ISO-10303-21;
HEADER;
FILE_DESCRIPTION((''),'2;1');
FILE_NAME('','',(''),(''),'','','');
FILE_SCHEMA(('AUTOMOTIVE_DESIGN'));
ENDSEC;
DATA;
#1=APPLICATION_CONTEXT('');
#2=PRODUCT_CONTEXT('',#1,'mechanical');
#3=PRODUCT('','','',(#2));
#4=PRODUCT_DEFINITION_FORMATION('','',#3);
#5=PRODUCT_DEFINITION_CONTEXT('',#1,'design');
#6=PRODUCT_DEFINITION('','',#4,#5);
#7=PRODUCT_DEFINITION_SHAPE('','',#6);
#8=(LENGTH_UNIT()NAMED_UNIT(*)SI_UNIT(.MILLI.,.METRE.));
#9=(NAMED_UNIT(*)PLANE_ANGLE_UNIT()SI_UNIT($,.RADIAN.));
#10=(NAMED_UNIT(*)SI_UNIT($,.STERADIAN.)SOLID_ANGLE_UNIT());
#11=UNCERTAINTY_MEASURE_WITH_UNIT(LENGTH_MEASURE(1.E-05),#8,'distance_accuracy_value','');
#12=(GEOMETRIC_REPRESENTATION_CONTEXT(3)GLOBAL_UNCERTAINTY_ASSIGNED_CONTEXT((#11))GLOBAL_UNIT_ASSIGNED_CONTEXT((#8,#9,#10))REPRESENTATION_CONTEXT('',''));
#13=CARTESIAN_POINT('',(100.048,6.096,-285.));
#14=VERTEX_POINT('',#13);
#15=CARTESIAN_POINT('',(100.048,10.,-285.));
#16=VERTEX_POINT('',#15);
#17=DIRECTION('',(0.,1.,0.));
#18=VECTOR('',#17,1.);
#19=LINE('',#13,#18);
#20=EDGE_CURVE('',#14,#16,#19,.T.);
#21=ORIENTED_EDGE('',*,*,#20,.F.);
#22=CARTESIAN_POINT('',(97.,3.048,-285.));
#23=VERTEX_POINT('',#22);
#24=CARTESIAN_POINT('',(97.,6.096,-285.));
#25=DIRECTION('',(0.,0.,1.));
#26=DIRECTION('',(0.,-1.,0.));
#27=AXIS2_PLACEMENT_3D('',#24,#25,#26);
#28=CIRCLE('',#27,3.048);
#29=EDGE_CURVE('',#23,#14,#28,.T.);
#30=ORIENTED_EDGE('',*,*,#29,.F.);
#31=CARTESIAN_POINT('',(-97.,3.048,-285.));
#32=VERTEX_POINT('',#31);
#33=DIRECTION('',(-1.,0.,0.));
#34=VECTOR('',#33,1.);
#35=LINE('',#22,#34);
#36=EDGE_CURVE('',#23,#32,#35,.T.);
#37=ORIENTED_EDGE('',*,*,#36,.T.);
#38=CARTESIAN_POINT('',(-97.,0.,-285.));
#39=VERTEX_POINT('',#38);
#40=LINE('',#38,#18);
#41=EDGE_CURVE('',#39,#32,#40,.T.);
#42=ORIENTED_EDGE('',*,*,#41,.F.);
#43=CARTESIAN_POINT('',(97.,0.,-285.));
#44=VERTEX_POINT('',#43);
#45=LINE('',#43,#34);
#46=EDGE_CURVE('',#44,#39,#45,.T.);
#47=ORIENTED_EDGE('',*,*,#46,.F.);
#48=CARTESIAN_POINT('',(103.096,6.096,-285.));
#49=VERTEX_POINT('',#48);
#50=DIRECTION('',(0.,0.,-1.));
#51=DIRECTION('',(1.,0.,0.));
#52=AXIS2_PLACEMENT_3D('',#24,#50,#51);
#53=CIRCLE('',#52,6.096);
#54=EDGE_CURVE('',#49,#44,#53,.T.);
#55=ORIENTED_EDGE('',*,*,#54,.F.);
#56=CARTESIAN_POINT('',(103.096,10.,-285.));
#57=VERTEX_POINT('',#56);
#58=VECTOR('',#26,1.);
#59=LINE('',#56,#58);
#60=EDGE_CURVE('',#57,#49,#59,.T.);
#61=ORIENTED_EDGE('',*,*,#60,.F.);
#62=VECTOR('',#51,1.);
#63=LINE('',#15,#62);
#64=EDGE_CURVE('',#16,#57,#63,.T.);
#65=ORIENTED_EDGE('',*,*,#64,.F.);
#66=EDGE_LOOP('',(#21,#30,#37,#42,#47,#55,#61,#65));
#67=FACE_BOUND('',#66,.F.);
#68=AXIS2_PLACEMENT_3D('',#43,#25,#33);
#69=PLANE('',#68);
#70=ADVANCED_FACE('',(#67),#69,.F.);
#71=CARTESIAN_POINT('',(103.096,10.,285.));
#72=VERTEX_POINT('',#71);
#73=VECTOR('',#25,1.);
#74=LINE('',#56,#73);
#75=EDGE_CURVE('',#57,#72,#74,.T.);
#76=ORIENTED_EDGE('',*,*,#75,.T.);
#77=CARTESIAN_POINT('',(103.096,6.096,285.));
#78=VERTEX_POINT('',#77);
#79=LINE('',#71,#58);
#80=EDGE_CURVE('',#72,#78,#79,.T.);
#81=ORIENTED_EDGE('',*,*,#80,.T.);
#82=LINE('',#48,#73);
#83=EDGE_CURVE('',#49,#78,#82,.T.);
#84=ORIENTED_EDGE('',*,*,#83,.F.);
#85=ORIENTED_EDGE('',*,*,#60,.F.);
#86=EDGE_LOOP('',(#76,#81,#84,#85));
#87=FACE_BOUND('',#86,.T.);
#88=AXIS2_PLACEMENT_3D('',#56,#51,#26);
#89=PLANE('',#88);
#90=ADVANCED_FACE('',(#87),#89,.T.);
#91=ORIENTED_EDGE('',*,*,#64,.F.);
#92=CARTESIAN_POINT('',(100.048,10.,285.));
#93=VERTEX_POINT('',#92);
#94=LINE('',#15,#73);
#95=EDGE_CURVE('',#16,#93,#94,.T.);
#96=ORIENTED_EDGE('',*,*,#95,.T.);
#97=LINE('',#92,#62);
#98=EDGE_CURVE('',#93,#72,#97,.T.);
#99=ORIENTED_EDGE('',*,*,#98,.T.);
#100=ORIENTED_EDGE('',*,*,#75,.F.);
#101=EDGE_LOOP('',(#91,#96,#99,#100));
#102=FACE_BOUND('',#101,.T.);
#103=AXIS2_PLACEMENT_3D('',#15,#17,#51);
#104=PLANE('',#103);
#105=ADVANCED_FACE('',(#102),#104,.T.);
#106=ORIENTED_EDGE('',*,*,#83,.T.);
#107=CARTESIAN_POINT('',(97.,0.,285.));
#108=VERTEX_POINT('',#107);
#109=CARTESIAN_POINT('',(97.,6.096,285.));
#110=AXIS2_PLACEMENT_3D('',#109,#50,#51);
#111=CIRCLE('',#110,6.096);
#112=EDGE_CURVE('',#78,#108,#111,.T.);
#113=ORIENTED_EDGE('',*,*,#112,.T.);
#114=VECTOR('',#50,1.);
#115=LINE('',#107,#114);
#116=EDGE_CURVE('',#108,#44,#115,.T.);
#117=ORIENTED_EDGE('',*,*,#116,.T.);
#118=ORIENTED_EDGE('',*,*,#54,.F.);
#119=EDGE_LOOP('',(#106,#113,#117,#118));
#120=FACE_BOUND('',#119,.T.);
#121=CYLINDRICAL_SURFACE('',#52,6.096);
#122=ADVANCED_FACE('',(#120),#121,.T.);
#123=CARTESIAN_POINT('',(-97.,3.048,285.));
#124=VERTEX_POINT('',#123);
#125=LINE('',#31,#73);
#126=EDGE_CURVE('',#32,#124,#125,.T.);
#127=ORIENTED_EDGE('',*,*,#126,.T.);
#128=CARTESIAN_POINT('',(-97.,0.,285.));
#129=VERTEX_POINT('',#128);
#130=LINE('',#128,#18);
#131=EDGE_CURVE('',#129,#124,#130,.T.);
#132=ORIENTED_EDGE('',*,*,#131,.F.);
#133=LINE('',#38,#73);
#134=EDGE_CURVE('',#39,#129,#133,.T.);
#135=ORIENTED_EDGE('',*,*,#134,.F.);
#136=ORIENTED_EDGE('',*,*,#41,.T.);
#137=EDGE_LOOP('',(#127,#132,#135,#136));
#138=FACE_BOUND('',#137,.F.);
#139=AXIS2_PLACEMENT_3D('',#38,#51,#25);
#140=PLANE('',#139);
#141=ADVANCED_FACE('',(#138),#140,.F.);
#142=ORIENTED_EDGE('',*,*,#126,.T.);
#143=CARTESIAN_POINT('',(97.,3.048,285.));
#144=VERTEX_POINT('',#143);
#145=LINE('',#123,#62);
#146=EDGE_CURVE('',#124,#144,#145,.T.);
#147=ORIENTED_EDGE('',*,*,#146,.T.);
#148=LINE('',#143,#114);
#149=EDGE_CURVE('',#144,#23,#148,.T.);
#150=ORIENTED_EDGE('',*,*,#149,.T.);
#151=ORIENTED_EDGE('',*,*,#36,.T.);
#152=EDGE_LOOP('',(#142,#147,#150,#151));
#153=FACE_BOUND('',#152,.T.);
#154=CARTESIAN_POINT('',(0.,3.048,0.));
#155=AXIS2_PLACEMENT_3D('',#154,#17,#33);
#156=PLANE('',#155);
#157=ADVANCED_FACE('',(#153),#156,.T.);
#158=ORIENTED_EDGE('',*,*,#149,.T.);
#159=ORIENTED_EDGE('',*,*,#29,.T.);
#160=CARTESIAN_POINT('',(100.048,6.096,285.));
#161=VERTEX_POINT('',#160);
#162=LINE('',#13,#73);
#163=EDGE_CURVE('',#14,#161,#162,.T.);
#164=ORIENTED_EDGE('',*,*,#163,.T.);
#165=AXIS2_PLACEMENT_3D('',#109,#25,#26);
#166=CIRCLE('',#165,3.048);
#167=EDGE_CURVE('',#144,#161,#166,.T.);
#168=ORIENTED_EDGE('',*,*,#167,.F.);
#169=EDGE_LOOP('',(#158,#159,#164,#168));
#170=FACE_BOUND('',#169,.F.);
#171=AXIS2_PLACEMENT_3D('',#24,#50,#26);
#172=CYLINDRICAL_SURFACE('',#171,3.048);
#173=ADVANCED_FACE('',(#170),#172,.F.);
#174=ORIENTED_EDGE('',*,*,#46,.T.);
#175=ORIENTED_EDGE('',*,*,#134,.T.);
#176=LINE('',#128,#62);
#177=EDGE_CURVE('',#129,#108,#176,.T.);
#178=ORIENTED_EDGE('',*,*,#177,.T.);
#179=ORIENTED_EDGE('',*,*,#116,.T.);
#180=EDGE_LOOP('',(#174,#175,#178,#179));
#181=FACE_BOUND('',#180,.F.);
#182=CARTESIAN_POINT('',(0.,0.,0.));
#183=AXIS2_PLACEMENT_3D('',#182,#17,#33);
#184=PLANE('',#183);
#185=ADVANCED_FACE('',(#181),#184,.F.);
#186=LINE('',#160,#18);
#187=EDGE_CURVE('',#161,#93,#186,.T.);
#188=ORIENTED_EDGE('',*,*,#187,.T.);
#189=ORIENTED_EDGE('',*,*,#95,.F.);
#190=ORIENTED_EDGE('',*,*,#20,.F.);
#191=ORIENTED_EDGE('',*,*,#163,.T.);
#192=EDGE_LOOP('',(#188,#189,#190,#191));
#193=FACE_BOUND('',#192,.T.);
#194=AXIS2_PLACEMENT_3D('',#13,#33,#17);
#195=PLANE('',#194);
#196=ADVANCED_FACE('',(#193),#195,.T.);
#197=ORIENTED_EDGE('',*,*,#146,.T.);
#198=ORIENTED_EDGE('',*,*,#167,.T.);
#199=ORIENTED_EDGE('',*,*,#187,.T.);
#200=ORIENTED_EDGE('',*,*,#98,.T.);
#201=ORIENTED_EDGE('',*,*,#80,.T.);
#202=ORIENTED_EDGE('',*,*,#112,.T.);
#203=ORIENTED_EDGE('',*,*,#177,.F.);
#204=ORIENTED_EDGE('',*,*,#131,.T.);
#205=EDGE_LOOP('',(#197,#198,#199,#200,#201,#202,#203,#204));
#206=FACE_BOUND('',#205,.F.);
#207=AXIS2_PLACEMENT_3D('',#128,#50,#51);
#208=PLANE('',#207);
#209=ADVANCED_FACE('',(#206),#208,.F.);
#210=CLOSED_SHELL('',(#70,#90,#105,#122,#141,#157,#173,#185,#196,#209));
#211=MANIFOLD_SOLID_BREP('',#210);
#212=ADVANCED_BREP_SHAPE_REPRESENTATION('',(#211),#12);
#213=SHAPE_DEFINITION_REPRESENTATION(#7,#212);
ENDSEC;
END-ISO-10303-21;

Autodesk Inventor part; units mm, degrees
ref_plane "YZ Plane" through (0, 0, 0) normal (1, 0, 0) x (0, 1, 0)
ref_plane "XZ Plane" through (0, 0, 0) normal (0, 1, 0) x (-1, 0, 0)
ref_plane "XY Plane" through (0, 0, 0) normal (0, 0, 1) x (1, 0, 0)
sketch "Sketch1" plane through (0, 0, 0) normal (0, 1, 0) x (-1, 0, 0)
  line L0 (97, 285) -> (-97, 285)
  line L1 (-97, 285) -> (-97, -285)
  line L2 (-97, -285) -> (97, -285)
  line L3 (97, -285) -> (97, 285)
  point P0 (0, 0)
  dimension "d0" = 194
  dimension "d1" = 570
  dimension "d2" = 97
  dimension "d3" = 285
extrude "Plate1" add sketch "Sketch1" along normal blind 3.048
sketch "Sketch3" plane through (100.048, 6.096, -285) normal (1, 0, 0) x (0, 1, 0)
  line L0 (0, 570) -> (0, 0)
  line L1 (0, 0) -> (3.904, 0)
  line L2 (3.904, 0) -> (3.904, 570)
  line L3 (3.904, 570) -> (0, 570)
edge flange "Flange1" height 10 angle 90 thickness 3.048 bend radius 3.048 thickness toward (1, 0, 0) relief tear relief width 3.048 relief depth 1.524 edges at (97, 3.048, 0) wall of the first edge with corners at (100.048, 6.096, 285) (100.048, 6.096, -285) (100.048, 10, -285) (100.048, 10, 285)
bend "Bend1"
corner "Corner1"
equation "\"d4\" = Thickness"
equation "\"d5\" = BendReliefWidth"
equation "\"d6\" = BendReliefDepth"
equation "\"d7\" = MinimumRemnant"
equation "\"d8\" = TransitionRadius"
equation "\"d11\" = BendRadius"
equation "\"d12\" = CornerReliefSize"
equation "\"d13\" = GapSize"
equation "\"d14\" = JacobiRadiusSize"
equation "\"d2\" = 0.5 * d0"
equation "\"d3\" = 0.5 * d1"
equation "\"BendRadius\" = Thickness"
equation "\"BendReliefWidth\" = Thickness"
equation "\"BendReliefDepth\" = 0.5 * Thickness"
equation "\"CornerReliefSize\" = 4 * Thickness"
equation "\"MinimumRemnant\" = 2 * Thickness"
equation "\"TransitionRadius\" = BendRadius"
equation "\"JacobiRadiusSize\" = BendRadius"
equation "\"GapSize\" = Thickness"
equation "\"Thickness\" = 3.048"
properties part number "CO-1-01-controlsSeperator"
